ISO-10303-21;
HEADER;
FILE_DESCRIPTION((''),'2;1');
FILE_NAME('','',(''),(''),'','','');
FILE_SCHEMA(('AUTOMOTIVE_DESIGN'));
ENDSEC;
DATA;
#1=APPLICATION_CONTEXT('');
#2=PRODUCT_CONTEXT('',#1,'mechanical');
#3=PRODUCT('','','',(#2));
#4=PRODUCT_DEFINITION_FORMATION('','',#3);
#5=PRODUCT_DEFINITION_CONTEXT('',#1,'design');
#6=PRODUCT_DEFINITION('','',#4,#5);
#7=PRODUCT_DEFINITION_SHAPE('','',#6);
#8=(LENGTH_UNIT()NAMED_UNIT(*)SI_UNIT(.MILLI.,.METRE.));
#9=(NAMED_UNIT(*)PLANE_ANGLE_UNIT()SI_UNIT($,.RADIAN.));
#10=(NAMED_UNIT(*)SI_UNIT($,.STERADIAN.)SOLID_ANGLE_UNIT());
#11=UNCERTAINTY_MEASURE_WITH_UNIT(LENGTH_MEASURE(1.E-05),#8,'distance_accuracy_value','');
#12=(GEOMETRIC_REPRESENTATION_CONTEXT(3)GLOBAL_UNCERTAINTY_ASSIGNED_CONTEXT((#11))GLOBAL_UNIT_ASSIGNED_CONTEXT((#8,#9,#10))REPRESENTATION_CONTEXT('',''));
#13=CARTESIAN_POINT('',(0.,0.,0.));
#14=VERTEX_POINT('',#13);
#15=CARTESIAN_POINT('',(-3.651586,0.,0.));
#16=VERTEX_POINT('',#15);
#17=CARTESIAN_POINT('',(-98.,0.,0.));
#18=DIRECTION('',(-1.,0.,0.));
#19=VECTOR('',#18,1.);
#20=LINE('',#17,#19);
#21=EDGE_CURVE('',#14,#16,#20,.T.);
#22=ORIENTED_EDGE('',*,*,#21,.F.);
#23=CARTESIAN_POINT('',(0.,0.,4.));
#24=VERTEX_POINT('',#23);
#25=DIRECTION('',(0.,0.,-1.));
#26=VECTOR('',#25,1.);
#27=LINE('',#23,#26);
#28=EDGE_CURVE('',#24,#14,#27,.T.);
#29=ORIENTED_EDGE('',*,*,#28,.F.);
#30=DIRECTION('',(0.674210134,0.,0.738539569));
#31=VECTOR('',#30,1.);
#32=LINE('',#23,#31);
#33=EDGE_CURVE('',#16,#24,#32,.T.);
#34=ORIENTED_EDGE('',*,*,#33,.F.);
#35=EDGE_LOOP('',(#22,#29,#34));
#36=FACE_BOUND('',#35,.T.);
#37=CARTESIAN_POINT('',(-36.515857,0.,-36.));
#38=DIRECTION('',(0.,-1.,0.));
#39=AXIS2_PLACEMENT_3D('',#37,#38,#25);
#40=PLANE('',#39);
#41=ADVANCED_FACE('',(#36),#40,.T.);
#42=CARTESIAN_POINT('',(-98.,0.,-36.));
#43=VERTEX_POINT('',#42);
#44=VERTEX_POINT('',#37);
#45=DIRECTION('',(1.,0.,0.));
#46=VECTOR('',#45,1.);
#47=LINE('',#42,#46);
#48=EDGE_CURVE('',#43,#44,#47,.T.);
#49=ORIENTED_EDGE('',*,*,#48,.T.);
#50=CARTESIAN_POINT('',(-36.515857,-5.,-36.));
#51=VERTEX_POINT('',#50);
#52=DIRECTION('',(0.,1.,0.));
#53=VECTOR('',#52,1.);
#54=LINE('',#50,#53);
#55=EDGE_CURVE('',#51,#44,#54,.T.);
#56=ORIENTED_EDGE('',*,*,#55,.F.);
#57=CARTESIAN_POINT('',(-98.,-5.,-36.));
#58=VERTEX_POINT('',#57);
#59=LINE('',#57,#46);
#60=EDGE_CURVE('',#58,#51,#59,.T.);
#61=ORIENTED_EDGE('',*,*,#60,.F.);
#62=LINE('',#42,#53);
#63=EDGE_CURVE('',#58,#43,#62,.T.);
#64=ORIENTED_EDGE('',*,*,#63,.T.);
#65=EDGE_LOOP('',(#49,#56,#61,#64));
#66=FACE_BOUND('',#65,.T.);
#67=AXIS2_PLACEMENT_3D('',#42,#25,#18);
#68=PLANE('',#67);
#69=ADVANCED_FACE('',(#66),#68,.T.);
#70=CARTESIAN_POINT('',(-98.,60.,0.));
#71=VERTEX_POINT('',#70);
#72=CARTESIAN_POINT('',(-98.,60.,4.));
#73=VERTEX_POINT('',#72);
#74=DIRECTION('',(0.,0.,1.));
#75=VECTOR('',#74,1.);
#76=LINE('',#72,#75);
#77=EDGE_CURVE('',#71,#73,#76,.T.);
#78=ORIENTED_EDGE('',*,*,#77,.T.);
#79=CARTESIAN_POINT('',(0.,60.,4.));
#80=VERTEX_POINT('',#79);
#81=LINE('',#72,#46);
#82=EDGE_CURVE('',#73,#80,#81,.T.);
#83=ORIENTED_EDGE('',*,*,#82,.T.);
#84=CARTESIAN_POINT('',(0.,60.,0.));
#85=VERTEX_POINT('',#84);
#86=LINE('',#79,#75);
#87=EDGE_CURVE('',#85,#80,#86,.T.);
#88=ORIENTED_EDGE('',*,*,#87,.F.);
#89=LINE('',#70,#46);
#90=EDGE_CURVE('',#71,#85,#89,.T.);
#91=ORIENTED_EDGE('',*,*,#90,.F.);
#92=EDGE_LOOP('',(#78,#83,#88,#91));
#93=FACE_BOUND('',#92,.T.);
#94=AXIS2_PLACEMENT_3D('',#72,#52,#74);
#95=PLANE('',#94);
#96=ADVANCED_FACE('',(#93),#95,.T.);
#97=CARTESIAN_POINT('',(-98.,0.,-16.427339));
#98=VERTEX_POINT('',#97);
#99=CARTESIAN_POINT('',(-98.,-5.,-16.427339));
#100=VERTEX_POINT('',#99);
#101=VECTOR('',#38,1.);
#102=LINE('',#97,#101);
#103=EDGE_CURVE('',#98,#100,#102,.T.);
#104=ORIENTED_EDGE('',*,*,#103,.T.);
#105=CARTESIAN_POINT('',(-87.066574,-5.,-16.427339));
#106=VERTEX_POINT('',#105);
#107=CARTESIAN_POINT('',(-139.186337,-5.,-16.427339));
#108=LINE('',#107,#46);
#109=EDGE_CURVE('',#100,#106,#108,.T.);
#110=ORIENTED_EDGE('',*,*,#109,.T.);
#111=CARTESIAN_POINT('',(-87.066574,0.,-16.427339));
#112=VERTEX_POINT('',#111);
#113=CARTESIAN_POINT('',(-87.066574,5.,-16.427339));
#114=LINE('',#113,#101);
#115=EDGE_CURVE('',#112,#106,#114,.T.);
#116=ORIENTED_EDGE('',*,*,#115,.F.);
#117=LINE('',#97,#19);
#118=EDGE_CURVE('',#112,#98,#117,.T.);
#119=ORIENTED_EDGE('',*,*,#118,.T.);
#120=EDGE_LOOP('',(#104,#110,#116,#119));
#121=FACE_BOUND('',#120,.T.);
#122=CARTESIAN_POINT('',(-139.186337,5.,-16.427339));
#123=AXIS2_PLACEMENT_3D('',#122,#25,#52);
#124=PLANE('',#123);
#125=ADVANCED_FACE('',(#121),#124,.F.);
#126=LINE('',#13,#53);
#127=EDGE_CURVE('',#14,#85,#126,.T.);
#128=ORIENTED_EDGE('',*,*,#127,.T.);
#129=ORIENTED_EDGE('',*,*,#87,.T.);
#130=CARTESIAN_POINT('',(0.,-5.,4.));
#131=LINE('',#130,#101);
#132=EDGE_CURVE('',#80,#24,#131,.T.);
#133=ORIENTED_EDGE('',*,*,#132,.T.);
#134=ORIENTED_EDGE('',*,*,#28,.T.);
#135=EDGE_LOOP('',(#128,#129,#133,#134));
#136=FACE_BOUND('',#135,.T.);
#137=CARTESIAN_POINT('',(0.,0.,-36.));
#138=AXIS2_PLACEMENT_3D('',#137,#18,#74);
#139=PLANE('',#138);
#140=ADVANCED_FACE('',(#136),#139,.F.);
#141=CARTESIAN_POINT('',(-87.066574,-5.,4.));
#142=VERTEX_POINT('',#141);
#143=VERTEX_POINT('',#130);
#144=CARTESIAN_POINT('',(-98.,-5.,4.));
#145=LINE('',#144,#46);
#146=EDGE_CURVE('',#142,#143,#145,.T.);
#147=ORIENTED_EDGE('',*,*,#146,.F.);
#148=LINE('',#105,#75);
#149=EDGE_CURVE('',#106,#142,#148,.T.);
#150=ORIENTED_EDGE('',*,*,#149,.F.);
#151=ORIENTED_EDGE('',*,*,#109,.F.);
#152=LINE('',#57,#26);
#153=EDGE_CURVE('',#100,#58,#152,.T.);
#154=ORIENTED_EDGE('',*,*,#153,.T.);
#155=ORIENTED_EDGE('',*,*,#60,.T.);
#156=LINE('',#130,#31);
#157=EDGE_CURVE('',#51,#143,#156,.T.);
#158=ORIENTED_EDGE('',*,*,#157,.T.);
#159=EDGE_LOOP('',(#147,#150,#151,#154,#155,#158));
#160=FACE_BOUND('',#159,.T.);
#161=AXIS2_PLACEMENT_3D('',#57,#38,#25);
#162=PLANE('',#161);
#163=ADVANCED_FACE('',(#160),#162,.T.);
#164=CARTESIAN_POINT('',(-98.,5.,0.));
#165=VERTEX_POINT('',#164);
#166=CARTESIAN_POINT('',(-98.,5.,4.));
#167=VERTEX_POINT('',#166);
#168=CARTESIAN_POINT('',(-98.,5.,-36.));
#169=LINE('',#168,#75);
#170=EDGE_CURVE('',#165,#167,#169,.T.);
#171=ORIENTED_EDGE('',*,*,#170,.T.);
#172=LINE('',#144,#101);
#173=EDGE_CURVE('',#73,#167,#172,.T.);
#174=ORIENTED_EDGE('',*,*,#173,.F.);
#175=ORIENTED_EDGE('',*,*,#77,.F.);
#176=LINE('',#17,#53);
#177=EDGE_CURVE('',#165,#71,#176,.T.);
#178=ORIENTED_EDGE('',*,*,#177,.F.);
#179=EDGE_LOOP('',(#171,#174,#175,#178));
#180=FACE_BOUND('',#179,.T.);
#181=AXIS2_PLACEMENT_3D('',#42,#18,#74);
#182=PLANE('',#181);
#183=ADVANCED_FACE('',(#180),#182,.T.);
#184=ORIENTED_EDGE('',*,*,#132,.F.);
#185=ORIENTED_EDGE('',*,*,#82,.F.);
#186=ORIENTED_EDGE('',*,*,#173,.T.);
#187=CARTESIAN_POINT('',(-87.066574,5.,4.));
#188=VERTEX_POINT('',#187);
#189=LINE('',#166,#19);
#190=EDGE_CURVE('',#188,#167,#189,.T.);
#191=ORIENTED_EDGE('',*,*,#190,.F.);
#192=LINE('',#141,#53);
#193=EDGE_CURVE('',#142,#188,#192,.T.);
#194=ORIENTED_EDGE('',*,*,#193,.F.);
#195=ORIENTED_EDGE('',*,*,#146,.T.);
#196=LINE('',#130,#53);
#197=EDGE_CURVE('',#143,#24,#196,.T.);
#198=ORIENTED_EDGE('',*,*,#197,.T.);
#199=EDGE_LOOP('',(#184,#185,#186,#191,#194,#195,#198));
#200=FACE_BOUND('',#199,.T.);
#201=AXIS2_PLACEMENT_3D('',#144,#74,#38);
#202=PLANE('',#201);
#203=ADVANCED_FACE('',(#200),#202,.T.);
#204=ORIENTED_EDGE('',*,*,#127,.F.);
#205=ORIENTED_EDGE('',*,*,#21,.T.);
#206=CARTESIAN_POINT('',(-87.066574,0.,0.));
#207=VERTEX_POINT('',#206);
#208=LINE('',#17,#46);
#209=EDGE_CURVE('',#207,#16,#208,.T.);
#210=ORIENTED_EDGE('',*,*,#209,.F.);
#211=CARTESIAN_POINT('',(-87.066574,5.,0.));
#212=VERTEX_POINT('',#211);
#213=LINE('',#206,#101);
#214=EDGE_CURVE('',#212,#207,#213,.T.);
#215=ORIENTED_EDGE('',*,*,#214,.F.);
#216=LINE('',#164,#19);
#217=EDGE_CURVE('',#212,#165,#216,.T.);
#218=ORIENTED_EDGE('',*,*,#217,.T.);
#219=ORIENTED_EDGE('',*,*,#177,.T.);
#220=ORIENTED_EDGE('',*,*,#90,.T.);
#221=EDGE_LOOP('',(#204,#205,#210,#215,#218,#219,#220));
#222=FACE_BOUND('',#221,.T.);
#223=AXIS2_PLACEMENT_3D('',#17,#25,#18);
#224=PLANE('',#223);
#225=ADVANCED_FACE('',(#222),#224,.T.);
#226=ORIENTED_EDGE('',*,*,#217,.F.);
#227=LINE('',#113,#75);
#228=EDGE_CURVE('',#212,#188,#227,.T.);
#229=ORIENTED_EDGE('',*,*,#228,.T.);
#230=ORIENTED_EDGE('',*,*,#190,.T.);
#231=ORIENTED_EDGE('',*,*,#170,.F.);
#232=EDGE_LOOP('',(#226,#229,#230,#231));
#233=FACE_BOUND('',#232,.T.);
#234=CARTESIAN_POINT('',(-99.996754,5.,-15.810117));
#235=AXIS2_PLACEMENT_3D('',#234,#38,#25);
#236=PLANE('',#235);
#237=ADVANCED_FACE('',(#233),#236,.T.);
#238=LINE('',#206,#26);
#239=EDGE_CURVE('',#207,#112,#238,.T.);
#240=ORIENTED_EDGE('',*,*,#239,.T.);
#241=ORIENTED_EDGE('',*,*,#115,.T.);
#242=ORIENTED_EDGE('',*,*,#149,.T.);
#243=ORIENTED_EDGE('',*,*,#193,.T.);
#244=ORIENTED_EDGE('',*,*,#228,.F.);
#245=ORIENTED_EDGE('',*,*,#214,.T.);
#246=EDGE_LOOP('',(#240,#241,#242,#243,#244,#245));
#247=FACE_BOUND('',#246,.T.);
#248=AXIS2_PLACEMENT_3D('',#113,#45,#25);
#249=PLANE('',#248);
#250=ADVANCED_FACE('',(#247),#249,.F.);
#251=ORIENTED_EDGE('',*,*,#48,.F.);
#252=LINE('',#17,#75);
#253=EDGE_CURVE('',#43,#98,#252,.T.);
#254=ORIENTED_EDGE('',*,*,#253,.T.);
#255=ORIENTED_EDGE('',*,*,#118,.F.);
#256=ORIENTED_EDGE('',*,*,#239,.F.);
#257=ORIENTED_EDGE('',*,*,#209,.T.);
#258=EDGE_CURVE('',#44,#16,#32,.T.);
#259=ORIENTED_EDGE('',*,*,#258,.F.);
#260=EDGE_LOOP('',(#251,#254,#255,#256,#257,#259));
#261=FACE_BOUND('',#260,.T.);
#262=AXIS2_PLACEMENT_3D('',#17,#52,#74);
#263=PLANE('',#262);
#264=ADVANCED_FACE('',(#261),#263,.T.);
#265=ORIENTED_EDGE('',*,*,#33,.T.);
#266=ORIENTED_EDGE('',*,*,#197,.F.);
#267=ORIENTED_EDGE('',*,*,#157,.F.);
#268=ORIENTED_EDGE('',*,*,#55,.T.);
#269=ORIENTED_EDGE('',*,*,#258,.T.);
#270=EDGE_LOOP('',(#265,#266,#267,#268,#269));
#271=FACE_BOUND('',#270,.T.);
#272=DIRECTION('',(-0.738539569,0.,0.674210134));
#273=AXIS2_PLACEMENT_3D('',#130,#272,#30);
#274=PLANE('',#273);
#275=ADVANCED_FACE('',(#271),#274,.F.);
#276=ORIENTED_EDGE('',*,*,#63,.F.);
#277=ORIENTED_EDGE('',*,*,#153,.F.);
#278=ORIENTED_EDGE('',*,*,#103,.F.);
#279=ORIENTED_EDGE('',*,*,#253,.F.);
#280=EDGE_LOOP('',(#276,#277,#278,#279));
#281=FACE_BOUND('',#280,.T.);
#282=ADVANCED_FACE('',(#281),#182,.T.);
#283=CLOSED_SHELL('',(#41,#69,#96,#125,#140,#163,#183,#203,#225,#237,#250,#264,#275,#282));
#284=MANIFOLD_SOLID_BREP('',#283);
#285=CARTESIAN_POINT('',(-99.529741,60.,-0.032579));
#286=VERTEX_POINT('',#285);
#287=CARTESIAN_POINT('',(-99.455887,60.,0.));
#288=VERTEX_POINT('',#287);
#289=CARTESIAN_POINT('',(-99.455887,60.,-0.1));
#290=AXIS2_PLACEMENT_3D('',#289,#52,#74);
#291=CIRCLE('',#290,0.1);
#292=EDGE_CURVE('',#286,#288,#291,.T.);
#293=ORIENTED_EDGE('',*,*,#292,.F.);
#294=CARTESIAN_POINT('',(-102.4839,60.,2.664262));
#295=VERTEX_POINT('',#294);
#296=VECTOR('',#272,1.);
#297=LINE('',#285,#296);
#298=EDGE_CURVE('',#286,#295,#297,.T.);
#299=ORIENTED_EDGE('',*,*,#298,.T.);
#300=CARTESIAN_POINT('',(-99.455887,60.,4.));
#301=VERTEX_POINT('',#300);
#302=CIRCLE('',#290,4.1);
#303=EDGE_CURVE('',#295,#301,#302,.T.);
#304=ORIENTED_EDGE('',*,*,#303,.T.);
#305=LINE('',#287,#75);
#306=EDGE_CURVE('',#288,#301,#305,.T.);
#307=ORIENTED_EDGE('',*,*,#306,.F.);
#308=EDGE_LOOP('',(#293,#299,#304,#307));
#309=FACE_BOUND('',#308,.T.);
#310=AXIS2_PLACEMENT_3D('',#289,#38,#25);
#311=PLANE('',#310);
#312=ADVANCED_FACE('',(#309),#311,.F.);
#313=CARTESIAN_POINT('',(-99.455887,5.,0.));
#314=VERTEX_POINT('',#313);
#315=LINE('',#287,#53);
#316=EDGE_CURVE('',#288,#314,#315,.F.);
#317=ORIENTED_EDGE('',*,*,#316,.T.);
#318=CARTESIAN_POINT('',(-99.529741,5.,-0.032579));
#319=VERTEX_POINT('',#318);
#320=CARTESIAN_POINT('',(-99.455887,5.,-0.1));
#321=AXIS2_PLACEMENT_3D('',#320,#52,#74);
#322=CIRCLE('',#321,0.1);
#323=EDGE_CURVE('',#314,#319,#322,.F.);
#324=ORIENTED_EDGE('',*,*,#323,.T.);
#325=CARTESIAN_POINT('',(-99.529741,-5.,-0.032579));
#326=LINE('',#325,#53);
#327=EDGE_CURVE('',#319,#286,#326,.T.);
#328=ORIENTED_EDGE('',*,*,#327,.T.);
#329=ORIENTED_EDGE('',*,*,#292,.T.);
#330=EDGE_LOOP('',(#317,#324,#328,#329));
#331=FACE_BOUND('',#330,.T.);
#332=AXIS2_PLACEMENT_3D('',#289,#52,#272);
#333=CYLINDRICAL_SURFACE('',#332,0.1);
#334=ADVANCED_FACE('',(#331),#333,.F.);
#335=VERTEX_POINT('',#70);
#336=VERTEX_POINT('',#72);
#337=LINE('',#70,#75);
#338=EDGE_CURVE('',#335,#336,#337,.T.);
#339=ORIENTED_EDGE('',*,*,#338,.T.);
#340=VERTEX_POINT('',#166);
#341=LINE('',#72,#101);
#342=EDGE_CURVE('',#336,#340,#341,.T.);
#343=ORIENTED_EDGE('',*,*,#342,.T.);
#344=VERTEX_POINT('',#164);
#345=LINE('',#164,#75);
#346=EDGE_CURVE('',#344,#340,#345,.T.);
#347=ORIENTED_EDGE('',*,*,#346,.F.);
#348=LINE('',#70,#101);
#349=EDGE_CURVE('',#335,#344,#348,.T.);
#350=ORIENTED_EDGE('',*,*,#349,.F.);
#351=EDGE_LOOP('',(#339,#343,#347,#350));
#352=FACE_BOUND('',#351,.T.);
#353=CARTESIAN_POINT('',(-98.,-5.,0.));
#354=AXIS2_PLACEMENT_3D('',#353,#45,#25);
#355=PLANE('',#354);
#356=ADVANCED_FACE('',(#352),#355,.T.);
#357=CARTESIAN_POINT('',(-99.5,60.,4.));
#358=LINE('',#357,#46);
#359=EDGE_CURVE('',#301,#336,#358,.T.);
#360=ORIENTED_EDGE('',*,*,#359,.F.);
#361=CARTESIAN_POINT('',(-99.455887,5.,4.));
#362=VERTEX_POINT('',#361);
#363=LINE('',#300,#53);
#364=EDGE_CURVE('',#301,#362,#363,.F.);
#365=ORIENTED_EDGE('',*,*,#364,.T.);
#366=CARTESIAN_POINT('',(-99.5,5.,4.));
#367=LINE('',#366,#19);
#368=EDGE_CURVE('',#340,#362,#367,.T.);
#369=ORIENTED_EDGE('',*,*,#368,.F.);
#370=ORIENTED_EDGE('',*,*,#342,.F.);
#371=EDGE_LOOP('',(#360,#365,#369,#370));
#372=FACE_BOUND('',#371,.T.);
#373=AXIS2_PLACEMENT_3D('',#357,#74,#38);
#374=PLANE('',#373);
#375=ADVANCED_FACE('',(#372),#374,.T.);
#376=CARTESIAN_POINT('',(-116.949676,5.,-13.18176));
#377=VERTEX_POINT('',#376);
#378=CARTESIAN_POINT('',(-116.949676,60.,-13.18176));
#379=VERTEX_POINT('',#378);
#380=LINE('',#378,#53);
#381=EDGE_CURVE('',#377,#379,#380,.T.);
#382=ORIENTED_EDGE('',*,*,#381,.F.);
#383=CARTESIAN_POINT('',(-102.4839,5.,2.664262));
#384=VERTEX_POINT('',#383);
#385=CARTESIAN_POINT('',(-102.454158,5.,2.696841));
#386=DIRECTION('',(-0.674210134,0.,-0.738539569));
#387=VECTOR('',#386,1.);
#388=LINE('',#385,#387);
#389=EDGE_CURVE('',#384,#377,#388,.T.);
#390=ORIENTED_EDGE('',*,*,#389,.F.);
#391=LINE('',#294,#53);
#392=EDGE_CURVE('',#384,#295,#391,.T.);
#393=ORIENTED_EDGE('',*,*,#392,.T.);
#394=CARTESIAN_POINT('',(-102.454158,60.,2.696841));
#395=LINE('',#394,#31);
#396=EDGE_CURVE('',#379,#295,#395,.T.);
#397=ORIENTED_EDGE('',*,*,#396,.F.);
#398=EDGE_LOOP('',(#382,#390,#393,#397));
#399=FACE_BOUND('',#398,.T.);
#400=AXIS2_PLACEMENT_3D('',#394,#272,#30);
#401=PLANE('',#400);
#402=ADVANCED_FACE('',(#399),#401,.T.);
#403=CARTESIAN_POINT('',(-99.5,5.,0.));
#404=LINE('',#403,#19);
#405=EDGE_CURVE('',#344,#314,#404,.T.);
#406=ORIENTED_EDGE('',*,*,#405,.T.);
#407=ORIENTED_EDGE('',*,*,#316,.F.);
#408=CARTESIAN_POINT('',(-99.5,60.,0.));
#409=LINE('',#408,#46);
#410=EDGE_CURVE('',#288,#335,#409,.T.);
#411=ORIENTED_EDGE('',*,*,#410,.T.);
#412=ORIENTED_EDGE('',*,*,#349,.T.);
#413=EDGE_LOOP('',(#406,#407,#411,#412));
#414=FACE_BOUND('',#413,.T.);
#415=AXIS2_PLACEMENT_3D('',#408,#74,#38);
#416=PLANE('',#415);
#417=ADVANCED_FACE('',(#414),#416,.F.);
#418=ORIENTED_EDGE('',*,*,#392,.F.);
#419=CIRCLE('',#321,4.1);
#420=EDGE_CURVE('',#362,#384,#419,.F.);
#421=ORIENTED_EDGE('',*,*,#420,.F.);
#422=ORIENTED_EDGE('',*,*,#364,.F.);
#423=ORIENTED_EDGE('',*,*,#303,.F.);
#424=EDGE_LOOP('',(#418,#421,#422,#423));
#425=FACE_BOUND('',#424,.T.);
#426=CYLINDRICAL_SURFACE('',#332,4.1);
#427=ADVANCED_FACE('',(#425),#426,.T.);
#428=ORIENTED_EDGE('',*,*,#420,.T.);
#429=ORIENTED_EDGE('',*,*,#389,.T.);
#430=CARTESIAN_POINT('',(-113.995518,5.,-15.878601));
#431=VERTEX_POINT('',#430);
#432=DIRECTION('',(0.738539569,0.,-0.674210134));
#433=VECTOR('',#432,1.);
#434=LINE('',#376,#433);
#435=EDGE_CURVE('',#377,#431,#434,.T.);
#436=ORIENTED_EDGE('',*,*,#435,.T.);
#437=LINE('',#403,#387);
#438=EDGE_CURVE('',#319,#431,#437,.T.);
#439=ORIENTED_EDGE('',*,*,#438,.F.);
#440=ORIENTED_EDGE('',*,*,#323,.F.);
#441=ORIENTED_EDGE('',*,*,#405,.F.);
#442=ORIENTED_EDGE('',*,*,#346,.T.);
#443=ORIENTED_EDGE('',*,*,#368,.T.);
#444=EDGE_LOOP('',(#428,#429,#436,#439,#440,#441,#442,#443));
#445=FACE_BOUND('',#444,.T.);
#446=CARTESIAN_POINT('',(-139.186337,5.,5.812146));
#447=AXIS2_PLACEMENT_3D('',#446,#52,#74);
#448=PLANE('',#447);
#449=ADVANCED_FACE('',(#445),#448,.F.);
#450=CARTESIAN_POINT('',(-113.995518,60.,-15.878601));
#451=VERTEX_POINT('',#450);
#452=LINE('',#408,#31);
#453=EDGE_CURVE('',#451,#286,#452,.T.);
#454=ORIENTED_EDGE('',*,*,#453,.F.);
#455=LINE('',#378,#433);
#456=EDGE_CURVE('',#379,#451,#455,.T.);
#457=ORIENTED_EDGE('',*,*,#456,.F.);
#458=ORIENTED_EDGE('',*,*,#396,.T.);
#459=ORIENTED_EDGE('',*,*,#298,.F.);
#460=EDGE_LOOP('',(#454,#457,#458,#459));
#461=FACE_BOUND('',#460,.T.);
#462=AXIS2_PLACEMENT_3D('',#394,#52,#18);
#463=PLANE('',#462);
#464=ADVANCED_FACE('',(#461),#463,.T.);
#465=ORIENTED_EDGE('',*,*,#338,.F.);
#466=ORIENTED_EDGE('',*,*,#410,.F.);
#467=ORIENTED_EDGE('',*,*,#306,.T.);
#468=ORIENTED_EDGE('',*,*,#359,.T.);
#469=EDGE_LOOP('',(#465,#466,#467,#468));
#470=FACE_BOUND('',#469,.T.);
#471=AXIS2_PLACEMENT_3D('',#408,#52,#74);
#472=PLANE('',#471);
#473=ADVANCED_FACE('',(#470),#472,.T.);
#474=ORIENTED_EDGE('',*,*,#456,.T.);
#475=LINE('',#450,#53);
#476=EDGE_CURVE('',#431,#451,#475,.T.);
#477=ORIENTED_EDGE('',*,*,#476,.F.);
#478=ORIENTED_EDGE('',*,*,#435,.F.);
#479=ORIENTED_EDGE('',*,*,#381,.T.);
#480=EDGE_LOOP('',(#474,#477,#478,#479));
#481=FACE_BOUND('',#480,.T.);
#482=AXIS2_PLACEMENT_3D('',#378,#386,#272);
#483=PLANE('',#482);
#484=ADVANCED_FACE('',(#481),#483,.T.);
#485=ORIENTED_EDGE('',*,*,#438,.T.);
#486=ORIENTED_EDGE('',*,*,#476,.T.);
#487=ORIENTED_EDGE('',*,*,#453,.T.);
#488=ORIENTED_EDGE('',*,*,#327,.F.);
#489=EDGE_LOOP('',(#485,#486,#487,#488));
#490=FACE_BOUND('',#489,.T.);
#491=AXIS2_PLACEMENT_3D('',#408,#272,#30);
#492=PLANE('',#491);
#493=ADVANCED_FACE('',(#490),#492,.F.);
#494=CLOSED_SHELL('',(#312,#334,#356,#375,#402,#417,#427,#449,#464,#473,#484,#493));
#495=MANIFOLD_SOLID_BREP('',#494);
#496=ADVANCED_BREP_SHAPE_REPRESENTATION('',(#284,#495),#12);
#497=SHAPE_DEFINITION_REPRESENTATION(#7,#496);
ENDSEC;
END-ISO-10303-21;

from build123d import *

# Parameters (mm, degrees)
EXTRUDE_1_DEPTH                  = 98
CUT_EXTRUDE_1_DEPTH              = 121.415945788
CUT_EXTRUDE_START                = 5
SKETCH_3_W                       = 12.842534068
SKETCH_3_H                       = 17.787416892
CUT_EXTRUDE_2_DEPTH              = 126.415945788
SKETCH_4_W                       = 4
SKETCH_4_H                       = 65
SM_BASE_FLANGE_1_DEPTH           = 1.5
SM_EDGE_FLANGE_1_STRIP_CUT_DEPTH = 65
SM_EDGE_FLANGE_1_DEPTH           = 65
SKETCH_9_W                       = 52.119762768
SKETCH_9_H                       = 22.239484817
CUT_EXTRUDE_2_2_DEPTH            = 10


# Sheet-metal steps are written as plain solids
with BuildPart() as part:
    # Sketch 1 → Вытянуть1 (new body)
    with BuildSketch(Plane(origin=(0, 0, 0), x_dir=(0, 0, -1), z_dir=(1, 0, 0))):
        Polygon((0, 0), (0, 60), (-4, 60), (-4, -5), (36, -5), (36, 0), align=None)
    extrude(amount=-EXTRUDE_1_DEPTH)

    # Эскиз2 → Вырез-Вытянуть1 (cut, through all)
    with BuildSketch(Plane(origin=(0, 0, 0), x_dir=(1, 0, 0), z_dir=(0, 1, 0))):
        Polygon((0, -4), (0, 52.377582957), (-36.515857127, 36), align=None)
    extrude(amount=-CUT_EXTRUDE_1_DEPTH, mode=Mode.SUBTRACT)

    # Эскиз3 → Cut-Extrude 2 (cut, through all)
    with BuildSketch(Plane(origin=(0, 0, 0), x_dir=(1, 0, 0), z_dir=(0, 1, 0)).offset(CUT_EXTRUDE_START)):
        with Locations((-93.575487089, 6.916408518)):
            Rectangle(SKETCH_3_W, SKETCH_3_H)
    extrude(amount=-CUT_EXTRUDE_2_DEPTH, mode=Mode.SUBTRACT)


with BuildPart() as body_2:
    # Эскиз4 → Базовая кромка1 (new body)
    with BuildSketch(Plane.ZY.offset(98)):
        with Locations((2, 27.5)):
            Rectangle(SKETCH_4_W, SKETCH_4_H)
    extrude(amount=SM_BASE_FLANGE_1_DEPTH)

    # Ребро-кромка1 strip (across the edge) → Ребро-кромка1 strip cut (cut)
    with BuildSketch(Plane(origin=(-99.5, -5, 0), x_dir=(0.7385395687806503, 0, -0.6742101344130709), z_dir=(0, 1, 0))):
        Polygon((-14.628602565, 7.938304662), (-2.664261551, -2.983899516), (0.032578987, -0.02974124), (-11.931762028, 10.892462937), align=None)
    extrude(amount=SM_EDGE_FLANGE_1_STRIP_CUT_DEPTH, mode=Mode.SUBTRACT)

    # Ребро-кромка1 section (across the edge) → Ребро-кромка1 (add)
    with BuildSketch(Plane(origin=(-99.5, -5, 0), x_dir=(0.7385395687806503, 0, -0.6742101344130709), z_dir=(0, 1, 0))):
        with BuildLine():
            Line((-4, 0.044112716), (-4, 21.5))
            Line((-4, 21.5), (0, 21.5))
            Line((0, 21.5), (0, 0.044112716))
            ThreePointArc((0, 0.044112716), (0.008506554, 0.003752472), (0.032578987, -0.02974124))
            Line((0.032578987, -0.02974124), (-2.664261551, -2.983899516))
            ThreePointArc((-2.664261551, -2.983899516), (-3.651231288, -1.610657304), (-4, 0.044112716))
        make_face()
    extrude(amount=SM_EDGE_FLANGE_1_DEPTH)


with BuildPart() as cut_extrude_2_2_tool:
    # Эскиз9 → Cut-Extrude 2 2 (new body)
    with BuildSketch(Plane.XZ.offset(5)):
        with Locations((-113.12645526, -5.307596352)):
            Rectangle(SKETCH_9_W, SKETCH_9_H)
    extrude(amount=-CUT_EXTRUDE_2_2_DEPTH)


with BuildPart() as part_1:
    add(part.part)

    # Cut-Extrude 2 2: cut by cut_extrude_2_2_tool
    add(cut_extrude_2_2_tool.part, mode=Mode.SUBTRACT)


with BuildPart() as body_2_1:
    add(body_2.part)

    # Cut-Extrude 2 2: cut by cut_extrude_2_2_tool
    add(cut_extrude_2_2_tool.part, mode=Mode.SUBTRACT)


solid = Compound([part_1.part, body_2_1.part])
